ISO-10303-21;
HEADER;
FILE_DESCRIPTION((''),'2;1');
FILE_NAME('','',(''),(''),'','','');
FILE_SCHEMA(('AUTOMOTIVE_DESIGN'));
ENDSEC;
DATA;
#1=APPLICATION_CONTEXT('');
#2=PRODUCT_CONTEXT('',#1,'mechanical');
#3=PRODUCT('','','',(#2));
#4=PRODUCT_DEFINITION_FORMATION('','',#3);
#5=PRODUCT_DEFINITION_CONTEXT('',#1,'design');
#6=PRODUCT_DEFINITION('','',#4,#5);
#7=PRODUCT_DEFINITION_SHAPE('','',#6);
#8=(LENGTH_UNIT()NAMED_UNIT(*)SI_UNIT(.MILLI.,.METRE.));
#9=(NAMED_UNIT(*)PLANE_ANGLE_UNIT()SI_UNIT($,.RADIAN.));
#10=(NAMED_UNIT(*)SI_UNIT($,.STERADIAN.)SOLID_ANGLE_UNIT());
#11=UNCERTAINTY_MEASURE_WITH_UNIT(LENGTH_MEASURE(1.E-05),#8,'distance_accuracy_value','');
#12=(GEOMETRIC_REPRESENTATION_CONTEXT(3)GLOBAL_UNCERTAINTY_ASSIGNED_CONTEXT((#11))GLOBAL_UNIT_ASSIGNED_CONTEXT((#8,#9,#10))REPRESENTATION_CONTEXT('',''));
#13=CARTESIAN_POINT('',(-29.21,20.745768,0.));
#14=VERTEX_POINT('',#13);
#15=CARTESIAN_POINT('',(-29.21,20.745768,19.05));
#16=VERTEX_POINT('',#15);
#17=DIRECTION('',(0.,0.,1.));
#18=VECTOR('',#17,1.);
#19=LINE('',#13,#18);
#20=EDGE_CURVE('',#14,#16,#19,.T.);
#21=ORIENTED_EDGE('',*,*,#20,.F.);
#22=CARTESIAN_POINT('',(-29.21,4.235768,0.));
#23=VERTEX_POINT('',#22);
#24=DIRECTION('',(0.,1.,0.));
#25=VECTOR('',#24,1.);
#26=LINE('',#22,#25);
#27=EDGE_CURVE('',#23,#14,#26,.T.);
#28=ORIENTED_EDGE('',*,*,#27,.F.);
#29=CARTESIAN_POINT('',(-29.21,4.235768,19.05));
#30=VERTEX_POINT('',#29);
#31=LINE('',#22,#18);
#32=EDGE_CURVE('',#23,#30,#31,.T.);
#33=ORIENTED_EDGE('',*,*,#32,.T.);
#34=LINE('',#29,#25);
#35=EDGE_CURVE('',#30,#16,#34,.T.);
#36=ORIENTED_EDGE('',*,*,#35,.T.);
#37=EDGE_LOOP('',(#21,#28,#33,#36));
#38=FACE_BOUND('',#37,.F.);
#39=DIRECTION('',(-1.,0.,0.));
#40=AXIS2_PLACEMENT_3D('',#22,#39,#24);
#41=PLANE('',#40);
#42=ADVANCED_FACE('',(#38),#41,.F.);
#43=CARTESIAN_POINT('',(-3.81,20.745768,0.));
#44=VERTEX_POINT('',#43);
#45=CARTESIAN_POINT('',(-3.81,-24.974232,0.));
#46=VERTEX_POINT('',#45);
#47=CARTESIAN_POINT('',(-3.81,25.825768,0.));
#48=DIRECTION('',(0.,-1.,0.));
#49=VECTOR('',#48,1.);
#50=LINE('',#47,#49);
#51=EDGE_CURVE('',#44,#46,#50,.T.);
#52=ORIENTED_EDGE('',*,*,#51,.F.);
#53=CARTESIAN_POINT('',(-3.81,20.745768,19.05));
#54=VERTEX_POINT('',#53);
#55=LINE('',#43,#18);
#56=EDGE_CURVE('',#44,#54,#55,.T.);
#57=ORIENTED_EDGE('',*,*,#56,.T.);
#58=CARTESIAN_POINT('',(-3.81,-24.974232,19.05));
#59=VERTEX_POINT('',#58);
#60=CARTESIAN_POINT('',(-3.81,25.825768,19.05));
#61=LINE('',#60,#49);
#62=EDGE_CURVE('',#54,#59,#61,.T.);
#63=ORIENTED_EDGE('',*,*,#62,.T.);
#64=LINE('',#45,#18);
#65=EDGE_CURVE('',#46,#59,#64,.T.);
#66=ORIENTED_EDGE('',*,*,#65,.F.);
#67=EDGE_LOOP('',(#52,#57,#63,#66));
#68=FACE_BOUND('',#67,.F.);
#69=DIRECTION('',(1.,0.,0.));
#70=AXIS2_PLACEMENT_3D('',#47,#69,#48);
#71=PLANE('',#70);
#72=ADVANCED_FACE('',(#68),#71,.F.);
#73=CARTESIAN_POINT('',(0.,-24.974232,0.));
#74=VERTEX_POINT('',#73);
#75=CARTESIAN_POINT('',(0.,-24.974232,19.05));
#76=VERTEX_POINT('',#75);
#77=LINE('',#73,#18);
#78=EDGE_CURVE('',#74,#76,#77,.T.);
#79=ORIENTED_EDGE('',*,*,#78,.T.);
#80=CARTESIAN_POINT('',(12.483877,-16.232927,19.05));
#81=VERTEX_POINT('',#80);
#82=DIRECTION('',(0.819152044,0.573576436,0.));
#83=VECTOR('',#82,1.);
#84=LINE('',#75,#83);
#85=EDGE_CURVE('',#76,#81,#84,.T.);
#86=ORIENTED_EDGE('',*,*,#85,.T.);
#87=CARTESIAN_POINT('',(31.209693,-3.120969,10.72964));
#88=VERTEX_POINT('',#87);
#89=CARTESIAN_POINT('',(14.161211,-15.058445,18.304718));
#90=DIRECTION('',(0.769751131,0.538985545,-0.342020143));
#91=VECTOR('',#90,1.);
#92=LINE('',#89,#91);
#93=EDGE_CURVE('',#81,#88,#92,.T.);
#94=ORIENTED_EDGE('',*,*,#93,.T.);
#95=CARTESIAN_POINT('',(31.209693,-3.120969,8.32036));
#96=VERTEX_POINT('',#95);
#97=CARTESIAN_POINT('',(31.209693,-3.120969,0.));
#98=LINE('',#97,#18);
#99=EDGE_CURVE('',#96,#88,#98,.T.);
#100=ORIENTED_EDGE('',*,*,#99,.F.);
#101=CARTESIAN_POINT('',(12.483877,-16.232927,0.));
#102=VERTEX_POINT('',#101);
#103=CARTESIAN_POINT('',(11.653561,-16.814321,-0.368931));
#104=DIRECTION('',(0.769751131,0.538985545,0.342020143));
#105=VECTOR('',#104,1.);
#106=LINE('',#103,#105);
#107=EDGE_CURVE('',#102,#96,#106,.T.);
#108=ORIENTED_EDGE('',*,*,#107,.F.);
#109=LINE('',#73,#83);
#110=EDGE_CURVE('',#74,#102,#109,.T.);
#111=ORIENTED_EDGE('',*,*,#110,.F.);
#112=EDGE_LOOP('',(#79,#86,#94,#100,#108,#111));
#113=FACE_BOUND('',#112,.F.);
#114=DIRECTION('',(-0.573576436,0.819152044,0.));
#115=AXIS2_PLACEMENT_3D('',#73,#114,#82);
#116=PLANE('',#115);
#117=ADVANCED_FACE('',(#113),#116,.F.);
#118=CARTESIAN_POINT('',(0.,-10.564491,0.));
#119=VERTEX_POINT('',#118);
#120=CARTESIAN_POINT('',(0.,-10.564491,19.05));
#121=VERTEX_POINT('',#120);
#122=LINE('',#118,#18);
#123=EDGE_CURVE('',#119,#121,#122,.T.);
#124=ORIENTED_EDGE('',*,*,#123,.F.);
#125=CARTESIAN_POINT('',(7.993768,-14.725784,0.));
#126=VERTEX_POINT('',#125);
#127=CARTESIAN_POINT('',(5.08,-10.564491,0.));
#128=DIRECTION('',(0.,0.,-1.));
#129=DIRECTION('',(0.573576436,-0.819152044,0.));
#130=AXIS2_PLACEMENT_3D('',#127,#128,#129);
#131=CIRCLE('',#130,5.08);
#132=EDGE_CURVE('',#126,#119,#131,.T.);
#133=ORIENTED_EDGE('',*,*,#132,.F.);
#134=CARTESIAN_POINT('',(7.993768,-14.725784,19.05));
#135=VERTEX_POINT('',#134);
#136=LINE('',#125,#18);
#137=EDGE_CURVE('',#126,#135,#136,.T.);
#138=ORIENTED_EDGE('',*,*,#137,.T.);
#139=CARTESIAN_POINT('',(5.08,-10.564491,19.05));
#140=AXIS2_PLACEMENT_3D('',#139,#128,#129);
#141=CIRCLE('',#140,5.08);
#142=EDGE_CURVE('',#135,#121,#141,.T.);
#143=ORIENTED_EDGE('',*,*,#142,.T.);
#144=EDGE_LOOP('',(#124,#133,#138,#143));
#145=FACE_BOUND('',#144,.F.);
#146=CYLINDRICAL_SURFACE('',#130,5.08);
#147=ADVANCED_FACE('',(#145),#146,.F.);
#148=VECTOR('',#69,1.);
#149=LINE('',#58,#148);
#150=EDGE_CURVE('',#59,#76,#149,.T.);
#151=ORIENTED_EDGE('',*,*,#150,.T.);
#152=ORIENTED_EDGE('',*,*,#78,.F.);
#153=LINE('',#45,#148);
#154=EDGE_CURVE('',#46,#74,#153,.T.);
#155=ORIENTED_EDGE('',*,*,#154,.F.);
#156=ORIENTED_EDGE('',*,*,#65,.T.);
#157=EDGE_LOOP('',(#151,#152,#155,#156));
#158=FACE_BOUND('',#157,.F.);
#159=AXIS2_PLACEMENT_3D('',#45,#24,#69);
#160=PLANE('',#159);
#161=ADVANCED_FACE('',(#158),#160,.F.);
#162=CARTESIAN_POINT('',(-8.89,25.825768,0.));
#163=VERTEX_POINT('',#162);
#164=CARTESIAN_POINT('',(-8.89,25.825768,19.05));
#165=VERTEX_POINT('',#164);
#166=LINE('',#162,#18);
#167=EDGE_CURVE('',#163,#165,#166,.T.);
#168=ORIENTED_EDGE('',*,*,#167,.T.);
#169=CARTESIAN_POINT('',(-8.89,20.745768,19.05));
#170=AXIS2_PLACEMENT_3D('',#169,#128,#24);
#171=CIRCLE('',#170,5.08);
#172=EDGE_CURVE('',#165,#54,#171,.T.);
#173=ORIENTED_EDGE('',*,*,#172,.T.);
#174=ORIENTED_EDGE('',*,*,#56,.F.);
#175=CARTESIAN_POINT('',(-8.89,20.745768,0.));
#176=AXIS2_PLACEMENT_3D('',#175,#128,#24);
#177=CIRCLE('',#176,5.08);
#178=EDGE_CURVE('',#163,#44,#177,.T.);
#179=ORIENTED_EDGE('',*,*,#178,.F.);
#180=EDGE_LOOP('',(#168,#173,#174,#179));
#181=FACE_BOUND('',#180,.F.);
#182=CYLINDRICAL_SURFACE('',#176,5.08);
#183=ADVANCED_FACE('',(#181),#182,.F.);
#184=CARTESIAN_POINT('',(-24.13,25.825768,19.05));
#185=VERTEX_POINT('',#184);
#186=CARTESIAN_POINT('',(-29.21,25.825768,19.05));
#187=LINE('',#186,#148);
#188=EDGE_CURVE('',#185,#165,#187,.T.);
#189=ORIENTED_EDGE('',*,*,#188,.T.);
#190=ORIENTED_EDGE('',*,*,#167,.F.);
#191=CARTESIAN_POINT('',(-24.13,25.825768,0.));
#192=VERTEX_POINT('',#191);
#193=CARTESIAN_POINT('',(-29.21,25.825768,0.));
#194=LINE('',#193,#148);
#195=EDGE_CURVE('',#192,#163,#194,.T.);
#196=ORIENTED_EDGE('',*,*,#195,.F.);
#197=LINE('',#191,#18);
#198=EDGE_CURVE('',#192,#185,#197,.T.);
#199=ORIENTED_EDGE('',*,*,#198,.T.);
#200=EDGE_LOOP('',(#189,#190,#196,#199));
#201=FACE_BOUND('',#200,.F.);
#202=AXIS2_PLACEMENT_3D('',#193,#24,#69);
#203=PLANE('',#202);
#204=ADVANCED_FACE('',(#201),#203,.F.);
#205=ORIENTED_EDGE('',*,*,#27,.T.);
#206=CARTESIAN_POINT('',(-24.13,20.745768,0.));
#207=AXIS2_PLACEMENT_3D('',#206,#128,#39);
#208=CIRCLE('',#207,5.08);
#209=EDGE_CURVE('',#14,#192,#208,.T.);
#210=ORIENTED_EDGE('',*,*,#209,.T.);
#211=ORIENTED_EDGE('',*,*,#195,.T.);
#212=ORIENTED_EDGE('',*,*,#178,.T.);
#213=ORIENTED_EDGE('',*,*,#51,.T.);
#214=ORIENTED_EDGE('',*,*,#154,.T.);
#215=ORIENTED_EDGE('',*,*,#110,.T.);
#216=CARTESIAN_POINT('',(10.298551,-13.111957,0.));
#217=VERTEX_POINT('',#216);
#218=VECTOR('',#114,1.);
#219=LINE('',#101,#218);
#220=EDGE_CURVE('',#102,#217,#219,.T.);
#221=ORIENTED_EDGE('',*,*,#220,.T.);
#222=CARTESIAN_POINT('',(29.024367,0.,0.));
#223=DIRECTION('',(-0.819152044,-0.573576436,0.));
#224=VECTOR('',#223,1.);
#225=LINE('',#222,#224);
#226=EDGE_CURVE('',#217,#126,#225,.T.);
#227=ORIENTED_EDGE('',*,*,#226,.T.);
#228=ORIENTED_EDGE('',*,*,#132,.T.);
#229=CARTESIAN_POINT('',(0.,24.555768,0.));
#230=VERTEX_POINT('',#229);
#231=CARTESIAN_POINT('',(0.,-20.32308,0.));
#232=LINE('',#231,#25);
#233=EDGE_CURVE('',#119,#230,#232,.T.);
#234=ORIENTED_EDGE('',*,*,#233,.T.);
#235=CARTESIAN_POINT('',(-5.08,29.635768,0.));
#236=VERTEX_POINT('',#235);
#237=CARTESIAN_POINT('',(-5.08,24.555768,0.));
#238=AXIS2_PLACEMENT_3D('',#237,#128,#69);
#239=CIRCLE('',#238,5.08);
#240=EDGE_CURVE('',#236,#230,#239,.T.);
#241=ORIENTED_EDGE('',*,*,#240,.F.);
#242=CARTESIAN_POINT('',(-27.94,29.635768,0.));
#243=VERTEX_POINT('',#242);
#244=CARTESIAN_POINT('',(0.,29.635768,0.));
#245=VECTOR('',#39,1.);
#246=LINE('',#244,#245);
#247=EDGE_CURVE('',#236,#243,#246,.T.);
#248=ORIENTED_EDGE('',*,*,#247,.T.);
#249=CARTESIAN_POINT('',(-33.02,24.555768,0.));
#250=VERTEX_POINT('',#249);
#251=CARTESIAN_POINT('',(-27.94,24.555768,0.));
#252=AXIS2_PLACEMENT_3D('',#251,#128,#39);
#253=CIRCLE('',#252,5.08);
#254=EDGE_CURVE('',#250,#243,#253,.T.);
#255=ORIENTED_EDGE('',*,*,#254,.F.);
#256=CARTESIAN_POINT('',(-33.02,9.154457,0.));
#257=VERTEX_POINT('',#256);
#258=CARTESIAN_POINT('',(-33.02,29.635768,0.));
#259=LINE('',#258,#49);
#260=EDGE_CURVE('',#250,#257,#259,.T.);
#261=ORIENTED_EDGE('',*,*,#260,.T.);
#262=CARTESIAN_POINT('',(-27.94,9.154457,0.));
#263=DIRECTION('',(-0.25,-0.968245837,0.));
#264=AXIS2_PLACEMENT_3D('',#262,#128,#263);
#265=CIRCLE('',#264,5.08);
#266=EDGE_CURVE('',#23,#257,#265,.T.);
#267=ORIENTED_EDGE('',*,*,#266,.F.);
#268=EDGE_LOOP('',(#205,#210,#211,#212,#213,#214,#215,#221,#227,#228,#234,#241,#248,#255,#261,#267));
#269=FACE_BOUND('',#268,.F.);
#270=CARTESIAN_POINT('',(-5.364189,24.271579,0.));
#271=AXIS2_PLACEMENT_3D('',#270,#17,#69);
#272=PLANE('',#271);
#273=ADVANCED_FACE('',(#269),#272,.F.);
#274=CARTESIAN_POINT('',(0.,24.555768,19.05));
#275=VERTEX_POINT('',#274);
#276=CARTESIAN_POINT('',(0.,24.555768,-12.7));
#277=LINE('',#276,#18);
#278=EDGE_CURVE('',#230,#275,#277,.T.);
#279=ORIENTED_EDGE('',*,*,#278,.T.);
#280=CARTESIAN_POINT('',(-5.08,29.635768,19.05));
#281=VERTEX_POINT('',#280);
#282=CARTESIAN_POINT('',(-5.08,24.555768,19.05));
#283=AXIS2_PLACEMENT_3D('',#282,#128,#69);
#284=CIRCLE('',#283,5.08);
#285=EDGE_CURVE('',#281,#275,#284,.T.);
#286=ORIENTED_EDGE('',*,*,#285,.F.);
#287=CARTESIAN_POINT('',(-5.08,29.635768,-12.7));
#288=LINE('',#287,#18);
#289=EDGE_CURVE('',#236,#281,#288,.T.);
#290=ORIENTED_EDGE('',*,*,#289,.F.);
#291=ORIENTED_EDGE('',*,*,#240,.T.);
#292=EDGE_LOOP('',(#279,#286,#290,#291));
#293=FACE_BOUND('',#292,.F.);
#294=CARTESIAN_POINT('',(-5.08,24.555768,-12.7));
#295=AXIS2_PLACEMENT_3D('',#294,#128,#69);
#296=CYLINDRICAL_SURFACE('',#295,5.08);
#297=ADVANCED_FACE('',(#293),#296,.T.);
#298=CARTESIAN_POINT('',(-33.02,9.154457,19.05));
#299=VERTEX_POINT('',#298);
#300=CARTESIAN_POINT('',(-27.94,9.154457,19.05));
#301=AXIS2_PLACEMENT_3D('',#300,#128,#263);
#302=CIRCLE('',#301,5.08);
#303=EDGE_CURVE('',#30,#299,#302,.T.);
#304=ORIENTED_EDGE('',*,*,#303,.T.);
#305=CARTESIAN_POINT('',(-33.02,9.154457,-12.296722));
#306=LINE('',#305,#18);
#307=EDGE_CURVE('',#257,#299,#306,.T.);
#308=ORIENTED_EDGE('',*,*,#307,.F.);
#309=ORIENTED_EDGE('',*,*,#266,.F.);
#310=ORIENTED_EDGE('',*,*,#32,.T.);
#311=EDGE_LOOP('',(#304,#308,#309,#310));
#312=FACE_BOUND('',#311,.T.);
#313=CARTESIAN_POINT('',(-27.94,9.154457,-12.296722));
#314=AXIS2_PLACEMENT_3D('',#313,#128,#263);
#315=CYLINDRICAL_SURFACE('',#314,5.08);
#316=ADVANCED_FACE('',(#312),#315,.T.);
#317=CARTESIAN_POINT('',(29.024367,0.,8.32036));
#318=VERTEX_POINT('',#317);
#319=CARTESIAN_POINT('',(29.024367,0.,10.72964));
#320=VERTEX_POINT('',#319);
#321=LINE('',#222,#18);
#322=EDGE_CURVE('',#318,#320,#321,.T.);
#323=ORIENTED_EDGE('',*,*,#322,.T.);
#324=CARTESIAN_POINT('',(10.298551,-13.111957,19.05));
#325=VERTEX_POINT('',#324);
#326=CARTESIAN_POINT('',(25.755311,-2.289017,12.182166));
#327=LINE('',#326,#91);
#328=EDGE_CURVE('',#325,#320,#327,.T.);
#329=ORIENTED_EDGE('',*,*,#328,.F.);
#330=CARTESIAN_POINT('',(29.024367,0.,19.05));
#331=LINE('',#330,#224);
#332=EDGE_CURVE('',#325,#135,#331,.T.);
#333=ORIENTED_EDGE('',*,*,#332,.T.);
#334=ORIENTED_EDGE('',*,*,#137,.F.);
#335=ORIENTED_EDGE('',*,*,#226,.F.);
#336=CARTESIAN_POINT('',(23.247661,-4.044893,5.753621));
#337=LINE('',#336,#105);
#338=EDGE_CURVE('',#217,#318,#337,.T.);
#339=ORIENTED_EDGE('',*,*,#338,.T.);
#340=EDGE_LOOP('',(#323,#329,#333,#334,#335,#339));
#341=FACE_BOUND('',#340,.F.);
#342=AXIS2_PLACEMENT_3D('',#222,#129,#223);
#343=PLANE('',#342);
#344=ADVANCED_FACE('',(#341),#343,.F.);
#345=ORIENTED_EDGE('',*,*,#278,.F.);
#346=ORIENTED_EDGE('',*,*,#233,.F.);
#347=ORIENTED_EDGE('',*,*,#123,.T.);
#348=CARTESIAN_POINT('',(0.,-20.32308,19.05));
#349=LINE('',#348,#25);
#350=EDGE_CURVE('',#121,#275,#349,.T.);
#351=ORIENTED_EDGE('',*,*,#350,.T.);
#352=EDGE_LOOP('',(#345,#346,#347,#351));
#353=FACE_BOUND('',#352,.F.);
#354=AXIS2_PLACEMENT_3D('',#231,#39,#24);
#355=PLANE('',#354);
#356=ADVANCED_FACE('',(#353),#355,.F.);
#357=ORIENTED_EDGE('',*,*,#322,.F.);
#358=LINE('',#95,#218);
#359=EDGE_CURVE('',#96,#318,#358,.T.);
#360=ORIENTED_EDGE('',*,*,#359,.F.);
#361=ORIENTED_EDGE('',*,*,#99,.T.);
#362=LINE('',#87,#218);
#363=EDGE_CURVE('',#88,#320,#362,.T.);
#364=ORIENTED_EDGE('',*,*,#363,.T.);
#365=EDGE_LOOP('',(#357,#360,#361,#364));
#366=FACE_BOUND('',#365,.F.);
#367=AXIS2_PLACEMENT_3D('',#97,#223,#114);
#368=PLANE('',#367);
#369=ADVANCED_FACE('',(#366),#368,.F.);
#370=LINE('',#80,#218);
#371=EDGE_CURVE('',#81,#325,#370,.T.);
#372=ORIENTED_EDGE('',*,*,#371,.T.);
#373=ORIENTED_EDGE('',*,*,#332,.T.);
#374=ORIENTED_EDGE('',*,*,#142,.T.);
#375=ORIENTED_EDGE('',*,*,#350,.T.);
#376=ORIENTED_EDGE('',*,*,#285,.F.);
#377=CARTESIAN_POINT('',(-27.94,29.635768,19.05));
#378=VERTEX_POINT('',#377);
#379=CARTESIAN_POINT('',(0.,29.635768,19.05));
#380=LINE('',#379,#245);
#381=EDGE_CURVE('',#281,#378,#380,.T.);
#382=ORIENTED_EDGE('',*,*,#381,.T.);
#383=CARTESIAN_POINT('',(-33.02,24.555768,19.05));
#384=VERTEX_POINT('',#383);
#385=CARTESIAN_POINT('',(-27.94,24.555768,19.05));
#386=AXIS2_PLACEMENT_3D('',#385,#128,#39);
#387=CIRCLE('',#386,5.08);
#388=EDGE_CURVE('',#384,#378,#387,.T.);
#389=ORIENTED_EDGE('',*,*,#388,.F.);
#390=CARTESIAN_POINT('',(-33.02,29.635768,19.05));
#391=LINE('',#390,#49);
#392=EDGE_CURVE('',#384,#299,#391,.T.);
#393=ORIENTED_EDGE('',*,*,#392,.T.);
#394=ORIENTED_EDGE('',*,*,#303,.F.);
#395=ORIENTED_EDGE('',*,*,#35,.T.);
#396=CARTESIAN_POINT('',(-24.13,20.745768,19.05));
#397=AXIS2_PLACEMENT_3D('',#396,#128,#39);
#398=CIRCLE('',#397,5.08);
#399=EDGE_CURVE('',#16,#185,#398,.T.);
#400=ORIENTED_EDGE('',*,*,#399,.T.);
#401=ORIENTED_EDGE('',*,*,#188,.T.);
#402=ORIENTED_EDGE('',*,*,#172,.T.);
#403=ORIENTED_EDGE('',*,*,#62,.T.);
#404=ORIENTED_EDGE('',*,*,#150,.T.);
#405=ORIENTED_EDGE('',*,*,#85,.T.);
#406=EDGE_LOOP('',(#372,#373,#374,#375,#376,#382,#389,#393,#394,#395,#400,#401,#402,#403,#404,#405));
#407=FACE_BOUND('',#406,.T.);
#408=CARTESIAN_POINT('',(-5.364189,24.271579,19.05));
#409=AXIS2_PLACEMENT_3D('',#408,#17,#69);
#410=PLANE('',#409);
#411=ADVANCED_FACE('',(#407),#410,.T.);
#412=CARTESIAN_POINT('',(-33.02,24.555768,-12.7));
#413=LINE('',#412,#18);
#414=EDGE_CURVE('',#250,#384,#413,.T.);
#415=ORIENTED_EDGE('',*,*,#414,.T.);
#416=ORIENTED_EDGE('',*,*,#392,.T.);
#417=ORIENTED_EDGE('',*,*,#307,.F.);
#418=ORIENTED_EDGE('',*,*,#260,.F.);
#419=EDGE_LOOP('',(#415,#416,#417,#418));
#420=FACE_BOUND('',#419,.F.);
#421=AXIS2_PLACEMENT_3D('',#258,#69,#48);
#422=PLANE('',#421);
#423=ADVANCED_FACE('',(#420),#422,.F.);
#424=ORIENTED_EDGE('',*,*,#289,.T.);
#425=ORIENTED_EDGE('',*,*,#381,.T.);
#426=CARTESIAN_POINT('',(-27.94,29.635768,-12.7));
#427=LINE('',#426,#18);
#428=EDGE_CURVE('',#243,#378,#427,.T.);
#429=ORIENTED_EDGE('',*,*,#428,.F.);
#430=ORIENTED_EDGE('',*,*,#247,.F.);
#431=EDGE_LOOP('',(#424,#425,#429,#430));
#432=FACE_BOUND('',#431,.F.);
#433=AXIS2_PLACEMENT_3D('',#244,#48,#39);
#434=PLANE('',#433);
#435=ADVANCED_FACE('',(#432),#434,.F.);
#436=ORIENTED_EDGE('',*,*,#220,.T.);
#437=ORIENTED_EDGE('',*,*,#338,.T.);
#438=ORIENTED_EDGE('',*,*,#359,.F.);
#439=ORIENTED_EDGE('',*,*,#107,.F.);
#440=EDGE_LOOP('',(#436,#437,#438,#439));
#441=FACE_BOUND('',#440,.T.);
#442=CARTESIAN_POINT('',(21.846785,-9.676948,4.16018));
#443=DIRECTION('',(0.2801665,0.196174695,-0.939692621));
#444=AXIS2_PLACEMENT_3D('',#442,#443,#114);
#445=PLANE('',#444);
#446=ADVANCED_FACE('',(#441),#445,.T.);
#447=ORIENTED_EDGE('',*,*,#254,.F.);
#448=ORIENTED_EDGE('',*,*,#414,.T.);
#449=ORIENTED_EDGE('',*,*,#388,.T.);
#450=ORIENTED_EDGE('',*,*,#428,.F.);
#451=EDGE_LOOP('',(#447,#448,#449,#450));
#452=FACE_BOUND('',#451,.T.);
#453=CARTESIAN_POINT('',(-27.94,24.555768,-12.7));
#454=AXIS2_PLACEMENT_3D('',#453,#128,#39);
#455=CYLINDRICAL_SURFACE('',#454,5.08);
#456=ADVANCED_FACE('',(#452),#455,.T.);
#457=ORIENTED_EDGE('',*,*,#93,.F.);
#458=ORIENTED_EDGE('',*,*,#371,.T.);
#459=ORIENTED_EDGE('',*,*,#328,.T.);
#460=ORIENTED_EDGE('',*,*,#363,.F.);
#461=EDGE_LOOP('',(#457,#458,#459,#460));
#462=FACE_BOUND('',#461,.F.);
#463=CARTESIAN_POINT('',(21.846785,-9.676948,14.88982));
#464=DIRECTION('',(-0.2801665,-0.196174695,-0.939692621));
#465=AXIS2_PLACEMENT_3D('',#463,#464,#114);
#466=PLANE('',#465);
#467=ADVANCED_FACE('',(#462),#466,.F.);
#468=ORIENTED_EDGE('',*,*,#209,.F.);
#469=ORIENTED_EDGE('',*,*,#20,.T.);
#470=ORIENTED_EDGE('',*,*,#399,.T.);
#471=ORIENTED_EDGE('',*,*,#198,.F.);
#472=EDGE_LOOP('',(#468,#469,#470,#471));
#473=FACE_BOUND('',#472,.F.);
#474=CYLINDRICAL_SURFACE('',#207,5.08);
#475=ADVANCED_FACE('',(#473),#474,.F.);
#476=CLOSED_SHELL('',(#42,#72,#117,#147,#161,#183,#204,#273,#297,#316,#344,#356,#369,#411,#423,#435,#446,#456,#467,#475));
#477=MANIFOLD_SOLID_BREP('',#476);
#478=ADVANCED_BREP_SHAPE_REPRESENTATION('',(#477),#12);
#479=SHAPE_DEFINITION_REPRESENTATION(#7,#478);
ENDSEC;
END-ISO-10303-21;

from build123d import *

# Parameters (mm, degrees)
F1_DEPTH     = 19.05
F2_T1_DEPTH  = 19.05
F2_T3_DEPTH  = 19.05
F2_T5_DEPTH  = 19.05
F2_T7_DEPTH  = 44.45
F2_T9_DEPTH  = 44.45
F2_T11_DEPTH = 43.6434442484
F3_SIZE2     = 8.3203595553
F3_SIZE      = 22.86
F3_2_SIZE2   = 8.3203595553
F3_2_SIZE    = 22.86


# Not quite as in the source:
# - a fillet or chamfer that OpenCascade refuses, or shapes differently, is made with other operations: its cross-section is extruded or revolved along the edge and cut away or added


with BuildPart() as f1:
    # F0 (on Top) → F1 (new body)
    with BuildSketch(Plane.XY):
        Polygon((-33.02, 29.6357684863), (-33.02, 4.2357684863), (-29.21, 4.2357684863), (-29.21, 25.8257684863), (-3.81, 25.8257684863), (-3.81, -24.9742315137), (0, -24.9742315137), (31.2096928874, -3.1209692887), (29.0243666649, 0), (0, -20.3230803305), (0, 29.6357684863), align=None)
    extrude(amount=F1_DEPTH)

    # F2: fillet of radius 5.08 on 6 edges, made by hand

    # F2_s2 → F2_t1 (join)
    with BuildSketch(Plane.XY):
        with BuildLine():
            ThreePointArc((7.9937682967, -14.7257835105), (2.7343170448, -15.0705061581), (0, -10.5644911255))
            Line((0, -10.5644911255), (0, -20.3230803305))
            Line((0, -20.3230803305), (7.9937682967, -14.7257835105))
        make_face()
    extrude(amount=F2_T1_DEPTH)

    # F2_s4 → F2_t3 (join)
    with BuildSketch(Plane.XY):
        with BuildLine():
            ThreePointArc((-29.21, 20.7457684863), (-27.7221024484, 24.3378709347), (-24.13, 25.8257684863))
            Line((-24.13, 25.8257684863), (-29.21, 25.8257684863))
            Line((-29.21, 25.8257684863), (-29.21, 20.7457684863))
        make_face()
    extrude(amount=F2_T3_DEPTH)

    # F2_s6 → F2_t5 (join)
    with BuildSketch(Plane.XY):
        with BuildLine():
            ThreePointArc((-8.89, 25.8257684863), (-5.2978975516, 24.3378709347), (-3.81, 20.7457684863))
            Line((-3.81, 20.7457684863), (-3.81, 25.8257684863))
            Line((-3.81, 25.8257684863), (-8.89, 25.8257684863))
        make_face()
    extrude(amount=F2_T5_DEPTH)

    # F2_s8 → F2_t7 (cut)
    with BuildSketch(Plane.XY.offset(-12.7)):
        with BuildLine():
            ThreePointArc((0, 24.5557684863), (-1.4878975516, 28.1478709347), (-5.08, 29.6357684863))
            Line((-5.08, 29.6357684863), (0, 29.6357684863))
            Line((0, 29.6357684863), (0, 24.5557684863))
        make_face()
    extrude(amount=F2_T7_DEPTH, mode=Mode.SUBTRACT)

    # F2_s10 → F2_t9 (cut)
    with BuildSketch(Plane.XY.offset(-12.7)):
        with BuildLine():
            ThreePointArc((-33.02, 24.5557684863), (-31.5321024484, 28.1478709347), (-27.94, 29.6357684863))
            Line((-27.94, 29.6357684863), (-33.02, 29.6357684863))
            Line((-33.02, 29.6357684863), (-33.02, 24.5557684863))
        make_face()
    extrude(amount=F2_T9_DEPTH, mode=Mode.SUBTRACT)

    # F2_s12 → F2_t11 (cut)
    with BuildSketch(Plane.XY.offset(-12.2967221242)):
        with BuildLine():
            ThreePointArc((-29.21, 4.2357684863), (-31.9560926284, 6.0436053626), (-33.02, 9.154457336))
            Line((-33.02, 9.154457336), (-33.02, 4.2357684863))
            Line((-33.02, 4.2357684863), (-29.21, 4.2357684863))
        make_face()
    extrude(amount=F2_T11_DEPTH, mode=Mode.SUBTRACT)

    # F3
    f3_edges = [f1.edges().sort_by_distance(p)[0] for p in [
        (30.11703, -1.560485, 19.05),
    ]]
    f3_side = f1.faces().sort_by_distance((-2.966928, -2.114232, 19.05))[0]
    chamfer(f3_edges, length=F3_SIZE, length2=F3_SIZE2, reference=f3_side)

    # F3#2
    f3_2_edges = [f1.edges().sort_by_distance(p)[0] for p in [
        (30.11703, -1.560485, 0),
    ]]
    f3_2_side = f1.faces().sort_by_distance((-2.966928, -2.114232, 0))[0]
    chamfer(f3_2_edges, length=F3_2_SIZE, length2=F3_2_SIZE2, reference=f3_2_side)


solid = f1.part
